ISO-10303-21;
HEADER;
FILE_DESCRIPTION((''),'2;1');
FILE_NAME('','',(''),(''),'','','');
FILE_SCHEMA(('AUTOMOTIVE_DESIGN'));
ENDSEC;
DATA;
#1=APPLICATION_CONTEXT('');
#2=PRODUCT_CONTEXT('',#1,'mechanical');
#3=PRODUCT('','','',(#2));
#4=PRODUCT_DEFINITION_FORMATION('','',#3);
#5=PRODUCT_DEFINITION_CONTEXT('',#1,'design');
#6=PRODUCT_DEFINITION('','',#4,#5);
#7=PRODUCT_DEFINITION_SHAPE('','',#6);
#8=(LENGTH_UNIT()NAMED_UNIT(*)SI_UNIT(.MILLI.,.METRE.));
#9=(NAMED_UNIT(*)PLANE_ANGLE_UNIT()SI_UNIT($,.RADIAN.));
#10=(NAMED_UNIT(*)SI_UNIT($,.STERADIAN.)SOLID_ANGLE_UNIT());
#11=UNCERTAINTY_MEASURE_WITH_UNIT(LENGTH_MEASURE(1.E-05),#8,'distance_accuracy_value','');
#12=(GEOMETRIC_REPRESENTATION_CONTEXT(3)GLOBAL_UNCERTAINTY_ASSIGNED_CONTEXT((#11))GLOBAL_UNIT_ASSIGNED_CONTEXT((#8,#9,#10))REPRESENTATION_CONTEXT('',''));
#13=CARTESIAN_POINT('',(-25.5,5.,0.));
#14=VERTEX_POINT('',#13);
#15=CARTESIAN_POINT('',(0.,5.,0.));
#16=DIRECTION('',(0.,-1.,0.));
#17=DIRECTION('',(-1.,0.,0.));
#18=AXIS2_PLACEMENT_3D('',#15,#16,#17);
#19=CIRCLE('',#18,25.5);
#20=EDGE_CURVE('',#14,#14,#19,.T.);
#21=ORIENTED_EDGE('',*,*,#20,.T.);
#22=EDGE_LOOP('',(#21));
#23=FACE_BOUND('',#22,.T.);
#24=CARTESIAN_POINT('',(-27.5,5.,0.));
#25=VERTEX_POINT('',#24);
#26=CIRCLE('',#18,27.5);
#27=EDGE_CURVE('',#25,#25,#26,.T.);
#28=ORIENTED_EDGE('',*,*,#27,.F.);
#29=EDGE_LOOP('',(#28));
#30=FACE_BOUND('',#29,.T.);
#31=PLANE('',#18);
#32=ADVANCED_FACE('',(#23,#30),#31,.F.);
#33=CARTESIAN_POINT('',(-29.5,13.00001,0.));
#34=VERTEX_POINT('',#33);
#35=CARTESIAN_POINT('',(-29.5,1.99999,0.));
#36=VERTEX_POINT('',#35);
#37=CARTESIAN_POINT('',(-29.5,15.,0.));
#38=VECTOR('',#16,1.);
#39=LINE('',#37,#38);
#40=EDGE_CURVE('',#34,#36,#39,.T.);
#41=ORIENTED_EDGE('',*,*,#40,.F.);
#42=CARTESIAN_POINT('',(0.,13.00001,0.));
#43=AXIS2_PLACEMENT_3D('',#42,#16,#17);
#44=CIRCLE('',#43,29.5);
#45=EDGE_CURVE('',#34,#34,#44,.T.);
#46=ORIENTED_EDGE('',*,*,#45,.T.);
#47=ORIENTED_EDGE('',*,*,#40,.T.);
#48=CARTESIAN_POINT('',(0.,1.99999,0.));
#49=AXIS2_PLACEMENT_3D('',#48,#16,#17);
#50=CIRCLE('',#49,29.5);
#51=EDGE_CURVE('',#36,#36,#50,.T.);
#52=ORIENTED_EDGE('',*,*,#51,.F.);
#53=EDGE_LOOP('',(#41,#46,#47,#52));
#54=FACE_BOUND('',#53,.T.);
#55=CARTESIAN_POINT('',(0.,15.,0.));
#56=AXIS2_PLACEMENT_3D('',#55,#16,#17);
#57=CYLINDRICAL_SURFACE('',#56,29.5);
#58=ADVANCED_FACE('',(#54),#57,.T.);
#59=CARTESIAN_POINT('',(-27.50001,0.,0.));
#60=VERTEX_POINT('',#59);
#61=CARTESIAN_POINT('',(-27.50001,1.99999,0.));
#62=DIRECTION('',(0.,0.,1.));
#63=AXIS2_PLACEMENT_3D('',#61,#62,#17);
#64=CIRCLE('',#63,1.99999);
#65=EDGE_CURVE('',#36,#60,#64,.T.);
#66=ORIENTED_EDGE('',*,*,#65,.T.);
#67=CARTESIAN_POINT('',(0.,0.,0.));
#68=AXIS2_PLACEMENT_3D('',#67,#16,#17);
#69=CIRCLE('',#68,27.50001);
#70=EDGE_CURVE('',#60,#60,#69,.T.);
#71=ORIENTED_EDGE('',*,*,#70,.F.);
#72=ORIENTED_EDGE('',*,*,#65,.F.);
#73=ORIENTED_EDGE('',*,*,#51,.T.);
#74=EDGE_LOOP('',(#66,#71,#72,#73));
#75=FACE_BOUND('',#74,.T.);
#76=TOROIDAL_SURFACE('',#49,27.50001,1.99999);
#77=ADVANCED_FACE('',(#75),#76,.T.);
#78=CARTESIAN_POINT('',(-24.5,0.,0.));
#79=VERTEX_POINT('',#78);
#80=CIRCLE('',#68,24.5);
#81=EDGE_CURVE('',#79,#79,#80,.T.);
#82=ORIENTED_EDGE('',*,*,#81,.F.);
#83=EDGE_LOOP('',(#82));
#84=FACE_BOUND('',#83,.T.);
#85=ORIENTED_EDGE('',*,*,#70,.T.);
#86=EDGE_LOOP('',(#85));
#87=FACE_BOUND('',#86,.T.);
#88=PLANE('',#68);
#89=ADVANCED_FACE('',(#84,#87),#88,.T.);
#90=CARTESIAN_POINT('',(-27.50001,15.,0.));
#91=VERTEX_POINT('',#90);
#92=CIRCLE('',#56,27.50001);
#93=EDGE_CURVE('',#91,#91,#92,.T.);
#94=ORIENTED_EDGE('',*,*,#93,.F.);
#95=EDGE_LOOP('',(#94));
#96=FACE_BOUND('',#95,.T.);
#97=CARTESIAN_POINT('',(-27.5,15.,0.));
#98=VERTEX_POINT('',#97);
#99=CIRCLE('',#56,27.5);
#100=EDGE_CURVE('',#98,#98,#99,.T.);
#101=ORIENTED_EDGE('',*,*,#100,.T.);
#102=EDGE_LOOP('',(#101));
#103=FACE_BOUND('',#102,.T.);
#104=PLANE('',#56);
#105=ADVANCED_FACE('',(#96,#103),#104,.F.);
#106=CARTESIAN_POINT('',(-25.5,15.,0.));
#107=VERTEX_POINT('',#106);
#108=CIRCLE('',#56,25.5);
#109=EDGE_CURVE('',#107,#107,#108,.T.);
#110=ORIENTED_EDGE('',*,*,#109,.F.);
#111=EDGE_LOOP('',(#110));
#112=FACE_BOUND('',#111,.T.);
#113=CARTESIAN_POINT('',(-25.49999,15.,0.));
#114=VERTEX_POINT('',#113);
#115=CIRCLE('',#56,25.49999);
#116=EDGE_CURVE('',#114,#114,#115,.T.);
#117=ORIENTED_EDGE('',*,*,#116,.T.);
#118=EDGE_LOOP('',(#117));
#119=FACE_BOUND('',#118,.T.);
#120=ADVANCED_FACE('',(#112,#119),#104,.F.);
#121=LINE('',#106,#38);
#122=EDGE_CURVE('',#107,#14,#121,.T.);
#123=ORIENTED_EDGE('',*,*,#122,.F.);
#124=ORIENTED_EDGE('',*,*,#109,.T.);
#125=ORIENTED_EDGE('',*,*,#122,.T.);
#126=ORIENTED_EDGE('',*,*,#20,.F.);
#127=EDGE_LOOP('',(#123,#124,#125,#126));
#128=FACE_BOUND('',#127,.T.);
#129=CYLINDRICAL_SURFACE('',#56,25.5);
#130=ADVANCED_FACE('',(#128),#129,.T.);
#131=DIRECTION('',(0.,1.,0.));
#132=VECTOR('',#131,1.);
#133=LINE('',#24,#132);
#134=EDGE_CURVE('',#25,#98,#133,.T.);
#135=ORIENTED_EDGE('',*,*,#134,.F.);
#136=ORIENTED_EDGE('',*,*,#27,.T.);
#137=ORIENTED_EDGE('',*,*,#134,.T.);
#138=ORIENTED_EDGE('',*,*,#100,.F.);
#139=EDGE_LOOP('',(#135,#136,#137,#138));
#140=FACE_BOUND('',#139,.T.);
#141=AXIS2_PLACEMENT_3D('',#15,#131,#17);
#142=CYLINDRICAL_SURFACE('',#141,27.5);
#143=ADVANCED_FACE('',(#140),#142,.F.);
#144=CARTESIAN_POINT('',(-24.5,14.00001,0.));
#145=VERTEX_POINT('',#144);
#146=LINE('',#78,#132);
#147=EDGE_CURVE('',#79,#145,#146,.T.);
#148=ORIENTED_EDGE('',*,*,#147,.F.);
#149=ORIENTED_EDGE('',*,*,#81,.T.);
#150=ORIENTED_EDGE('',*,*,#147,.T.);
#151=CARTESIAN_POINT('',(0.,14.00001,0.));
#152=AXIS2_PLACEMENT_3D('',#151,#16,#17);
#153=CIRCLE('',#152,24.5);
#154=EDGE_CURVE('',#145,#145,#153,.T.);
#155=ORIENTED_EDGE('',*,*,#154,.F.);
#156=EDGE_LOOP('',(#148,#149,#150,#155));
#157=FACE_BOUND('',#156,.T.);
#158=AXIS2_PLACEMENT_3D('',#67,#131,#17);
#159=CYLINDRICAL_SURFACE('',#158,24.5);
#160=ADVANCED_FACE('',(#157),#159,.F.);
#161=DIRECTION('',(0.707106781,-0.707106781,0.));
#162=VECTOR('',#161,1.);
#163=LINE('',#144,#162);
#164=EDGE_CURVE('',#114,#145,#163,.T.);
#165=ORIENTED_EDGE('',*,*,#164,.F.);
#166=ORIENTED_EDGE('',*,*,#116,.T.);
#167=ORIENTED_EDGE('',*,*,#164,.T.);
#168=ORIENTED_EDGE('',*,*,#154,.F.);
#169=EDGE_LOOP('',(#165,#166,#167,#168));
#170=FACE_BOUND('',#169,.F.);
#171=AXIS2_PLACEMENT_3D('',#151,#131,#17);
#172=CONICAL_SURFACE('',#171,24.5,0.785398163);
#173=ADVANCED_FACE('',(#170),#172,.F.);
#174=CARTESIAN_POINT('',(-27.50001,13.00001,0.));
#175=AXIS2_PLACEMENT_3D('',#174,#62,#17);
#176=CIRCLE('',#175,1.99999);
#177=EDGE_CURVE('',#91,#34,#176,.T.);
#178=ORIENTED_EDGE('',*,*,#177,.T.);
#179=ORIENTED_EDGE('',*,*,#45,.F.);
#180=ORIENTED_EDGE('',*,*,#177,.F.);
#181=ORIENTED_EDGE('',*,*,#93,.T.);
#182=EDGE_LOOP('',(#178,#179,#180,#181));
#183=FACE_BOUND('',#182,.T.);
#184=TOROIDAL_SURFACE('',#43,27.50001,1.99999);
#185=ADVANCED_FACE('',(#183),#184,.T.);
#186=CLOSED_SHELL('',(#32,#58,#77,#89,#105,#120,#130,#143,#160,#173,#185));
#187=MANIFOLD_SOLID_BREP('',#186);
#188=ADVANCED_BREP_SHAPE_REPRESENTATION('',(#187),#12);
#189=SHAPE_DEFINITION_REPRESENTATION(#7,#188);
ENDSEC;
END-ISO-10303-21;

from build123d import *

# Parameters (mm, degrees)
F2_R    = 1.99999
F3_SIZE = 0.99999


# Not quite as in the source:
# - a fillet or chamfer is up to 0.001 mm smaller than in the source, because OpenCascade refuses the exact size


with BuildPart() as f1:
    # F0 (on Top) → F1 (revolve)
    with BuildSketch(Plane.XY):
        Polygon((-24.5, 0), (-24.5, 14.3020306939), (-24.5, 15), (-25.5, 15), (-25.5, 5), (-27.5, 5), (-27.5, 15), (-29.5, 15), (-29.5, 0), align=None)
    revolve(axis=Axis((0, 7.5544440188, 0), (0, -1, 0)))

    # F2 (radius 2 in the source; OpenCascade refuses exactly that, so slightly less here)
    f2_edges = [f1.edges().sort_by_distance(p)[0] for p in [
        (29.5, 15, 0),
        (29.5, 0, 0),
    ]]
    fillet(f2_edges, radius=F2_R)

    # F3 (size 1 in the source; OpenCascade refuses exactly that, so slightly less here)
    f3_edges = [f1.edges().sort_by_distance(p)[0] for p in [
        (24.5, 15, 0),
    ]]
    chamfer(f3_edges, length=F3_SIZE)


solid = f1.part
